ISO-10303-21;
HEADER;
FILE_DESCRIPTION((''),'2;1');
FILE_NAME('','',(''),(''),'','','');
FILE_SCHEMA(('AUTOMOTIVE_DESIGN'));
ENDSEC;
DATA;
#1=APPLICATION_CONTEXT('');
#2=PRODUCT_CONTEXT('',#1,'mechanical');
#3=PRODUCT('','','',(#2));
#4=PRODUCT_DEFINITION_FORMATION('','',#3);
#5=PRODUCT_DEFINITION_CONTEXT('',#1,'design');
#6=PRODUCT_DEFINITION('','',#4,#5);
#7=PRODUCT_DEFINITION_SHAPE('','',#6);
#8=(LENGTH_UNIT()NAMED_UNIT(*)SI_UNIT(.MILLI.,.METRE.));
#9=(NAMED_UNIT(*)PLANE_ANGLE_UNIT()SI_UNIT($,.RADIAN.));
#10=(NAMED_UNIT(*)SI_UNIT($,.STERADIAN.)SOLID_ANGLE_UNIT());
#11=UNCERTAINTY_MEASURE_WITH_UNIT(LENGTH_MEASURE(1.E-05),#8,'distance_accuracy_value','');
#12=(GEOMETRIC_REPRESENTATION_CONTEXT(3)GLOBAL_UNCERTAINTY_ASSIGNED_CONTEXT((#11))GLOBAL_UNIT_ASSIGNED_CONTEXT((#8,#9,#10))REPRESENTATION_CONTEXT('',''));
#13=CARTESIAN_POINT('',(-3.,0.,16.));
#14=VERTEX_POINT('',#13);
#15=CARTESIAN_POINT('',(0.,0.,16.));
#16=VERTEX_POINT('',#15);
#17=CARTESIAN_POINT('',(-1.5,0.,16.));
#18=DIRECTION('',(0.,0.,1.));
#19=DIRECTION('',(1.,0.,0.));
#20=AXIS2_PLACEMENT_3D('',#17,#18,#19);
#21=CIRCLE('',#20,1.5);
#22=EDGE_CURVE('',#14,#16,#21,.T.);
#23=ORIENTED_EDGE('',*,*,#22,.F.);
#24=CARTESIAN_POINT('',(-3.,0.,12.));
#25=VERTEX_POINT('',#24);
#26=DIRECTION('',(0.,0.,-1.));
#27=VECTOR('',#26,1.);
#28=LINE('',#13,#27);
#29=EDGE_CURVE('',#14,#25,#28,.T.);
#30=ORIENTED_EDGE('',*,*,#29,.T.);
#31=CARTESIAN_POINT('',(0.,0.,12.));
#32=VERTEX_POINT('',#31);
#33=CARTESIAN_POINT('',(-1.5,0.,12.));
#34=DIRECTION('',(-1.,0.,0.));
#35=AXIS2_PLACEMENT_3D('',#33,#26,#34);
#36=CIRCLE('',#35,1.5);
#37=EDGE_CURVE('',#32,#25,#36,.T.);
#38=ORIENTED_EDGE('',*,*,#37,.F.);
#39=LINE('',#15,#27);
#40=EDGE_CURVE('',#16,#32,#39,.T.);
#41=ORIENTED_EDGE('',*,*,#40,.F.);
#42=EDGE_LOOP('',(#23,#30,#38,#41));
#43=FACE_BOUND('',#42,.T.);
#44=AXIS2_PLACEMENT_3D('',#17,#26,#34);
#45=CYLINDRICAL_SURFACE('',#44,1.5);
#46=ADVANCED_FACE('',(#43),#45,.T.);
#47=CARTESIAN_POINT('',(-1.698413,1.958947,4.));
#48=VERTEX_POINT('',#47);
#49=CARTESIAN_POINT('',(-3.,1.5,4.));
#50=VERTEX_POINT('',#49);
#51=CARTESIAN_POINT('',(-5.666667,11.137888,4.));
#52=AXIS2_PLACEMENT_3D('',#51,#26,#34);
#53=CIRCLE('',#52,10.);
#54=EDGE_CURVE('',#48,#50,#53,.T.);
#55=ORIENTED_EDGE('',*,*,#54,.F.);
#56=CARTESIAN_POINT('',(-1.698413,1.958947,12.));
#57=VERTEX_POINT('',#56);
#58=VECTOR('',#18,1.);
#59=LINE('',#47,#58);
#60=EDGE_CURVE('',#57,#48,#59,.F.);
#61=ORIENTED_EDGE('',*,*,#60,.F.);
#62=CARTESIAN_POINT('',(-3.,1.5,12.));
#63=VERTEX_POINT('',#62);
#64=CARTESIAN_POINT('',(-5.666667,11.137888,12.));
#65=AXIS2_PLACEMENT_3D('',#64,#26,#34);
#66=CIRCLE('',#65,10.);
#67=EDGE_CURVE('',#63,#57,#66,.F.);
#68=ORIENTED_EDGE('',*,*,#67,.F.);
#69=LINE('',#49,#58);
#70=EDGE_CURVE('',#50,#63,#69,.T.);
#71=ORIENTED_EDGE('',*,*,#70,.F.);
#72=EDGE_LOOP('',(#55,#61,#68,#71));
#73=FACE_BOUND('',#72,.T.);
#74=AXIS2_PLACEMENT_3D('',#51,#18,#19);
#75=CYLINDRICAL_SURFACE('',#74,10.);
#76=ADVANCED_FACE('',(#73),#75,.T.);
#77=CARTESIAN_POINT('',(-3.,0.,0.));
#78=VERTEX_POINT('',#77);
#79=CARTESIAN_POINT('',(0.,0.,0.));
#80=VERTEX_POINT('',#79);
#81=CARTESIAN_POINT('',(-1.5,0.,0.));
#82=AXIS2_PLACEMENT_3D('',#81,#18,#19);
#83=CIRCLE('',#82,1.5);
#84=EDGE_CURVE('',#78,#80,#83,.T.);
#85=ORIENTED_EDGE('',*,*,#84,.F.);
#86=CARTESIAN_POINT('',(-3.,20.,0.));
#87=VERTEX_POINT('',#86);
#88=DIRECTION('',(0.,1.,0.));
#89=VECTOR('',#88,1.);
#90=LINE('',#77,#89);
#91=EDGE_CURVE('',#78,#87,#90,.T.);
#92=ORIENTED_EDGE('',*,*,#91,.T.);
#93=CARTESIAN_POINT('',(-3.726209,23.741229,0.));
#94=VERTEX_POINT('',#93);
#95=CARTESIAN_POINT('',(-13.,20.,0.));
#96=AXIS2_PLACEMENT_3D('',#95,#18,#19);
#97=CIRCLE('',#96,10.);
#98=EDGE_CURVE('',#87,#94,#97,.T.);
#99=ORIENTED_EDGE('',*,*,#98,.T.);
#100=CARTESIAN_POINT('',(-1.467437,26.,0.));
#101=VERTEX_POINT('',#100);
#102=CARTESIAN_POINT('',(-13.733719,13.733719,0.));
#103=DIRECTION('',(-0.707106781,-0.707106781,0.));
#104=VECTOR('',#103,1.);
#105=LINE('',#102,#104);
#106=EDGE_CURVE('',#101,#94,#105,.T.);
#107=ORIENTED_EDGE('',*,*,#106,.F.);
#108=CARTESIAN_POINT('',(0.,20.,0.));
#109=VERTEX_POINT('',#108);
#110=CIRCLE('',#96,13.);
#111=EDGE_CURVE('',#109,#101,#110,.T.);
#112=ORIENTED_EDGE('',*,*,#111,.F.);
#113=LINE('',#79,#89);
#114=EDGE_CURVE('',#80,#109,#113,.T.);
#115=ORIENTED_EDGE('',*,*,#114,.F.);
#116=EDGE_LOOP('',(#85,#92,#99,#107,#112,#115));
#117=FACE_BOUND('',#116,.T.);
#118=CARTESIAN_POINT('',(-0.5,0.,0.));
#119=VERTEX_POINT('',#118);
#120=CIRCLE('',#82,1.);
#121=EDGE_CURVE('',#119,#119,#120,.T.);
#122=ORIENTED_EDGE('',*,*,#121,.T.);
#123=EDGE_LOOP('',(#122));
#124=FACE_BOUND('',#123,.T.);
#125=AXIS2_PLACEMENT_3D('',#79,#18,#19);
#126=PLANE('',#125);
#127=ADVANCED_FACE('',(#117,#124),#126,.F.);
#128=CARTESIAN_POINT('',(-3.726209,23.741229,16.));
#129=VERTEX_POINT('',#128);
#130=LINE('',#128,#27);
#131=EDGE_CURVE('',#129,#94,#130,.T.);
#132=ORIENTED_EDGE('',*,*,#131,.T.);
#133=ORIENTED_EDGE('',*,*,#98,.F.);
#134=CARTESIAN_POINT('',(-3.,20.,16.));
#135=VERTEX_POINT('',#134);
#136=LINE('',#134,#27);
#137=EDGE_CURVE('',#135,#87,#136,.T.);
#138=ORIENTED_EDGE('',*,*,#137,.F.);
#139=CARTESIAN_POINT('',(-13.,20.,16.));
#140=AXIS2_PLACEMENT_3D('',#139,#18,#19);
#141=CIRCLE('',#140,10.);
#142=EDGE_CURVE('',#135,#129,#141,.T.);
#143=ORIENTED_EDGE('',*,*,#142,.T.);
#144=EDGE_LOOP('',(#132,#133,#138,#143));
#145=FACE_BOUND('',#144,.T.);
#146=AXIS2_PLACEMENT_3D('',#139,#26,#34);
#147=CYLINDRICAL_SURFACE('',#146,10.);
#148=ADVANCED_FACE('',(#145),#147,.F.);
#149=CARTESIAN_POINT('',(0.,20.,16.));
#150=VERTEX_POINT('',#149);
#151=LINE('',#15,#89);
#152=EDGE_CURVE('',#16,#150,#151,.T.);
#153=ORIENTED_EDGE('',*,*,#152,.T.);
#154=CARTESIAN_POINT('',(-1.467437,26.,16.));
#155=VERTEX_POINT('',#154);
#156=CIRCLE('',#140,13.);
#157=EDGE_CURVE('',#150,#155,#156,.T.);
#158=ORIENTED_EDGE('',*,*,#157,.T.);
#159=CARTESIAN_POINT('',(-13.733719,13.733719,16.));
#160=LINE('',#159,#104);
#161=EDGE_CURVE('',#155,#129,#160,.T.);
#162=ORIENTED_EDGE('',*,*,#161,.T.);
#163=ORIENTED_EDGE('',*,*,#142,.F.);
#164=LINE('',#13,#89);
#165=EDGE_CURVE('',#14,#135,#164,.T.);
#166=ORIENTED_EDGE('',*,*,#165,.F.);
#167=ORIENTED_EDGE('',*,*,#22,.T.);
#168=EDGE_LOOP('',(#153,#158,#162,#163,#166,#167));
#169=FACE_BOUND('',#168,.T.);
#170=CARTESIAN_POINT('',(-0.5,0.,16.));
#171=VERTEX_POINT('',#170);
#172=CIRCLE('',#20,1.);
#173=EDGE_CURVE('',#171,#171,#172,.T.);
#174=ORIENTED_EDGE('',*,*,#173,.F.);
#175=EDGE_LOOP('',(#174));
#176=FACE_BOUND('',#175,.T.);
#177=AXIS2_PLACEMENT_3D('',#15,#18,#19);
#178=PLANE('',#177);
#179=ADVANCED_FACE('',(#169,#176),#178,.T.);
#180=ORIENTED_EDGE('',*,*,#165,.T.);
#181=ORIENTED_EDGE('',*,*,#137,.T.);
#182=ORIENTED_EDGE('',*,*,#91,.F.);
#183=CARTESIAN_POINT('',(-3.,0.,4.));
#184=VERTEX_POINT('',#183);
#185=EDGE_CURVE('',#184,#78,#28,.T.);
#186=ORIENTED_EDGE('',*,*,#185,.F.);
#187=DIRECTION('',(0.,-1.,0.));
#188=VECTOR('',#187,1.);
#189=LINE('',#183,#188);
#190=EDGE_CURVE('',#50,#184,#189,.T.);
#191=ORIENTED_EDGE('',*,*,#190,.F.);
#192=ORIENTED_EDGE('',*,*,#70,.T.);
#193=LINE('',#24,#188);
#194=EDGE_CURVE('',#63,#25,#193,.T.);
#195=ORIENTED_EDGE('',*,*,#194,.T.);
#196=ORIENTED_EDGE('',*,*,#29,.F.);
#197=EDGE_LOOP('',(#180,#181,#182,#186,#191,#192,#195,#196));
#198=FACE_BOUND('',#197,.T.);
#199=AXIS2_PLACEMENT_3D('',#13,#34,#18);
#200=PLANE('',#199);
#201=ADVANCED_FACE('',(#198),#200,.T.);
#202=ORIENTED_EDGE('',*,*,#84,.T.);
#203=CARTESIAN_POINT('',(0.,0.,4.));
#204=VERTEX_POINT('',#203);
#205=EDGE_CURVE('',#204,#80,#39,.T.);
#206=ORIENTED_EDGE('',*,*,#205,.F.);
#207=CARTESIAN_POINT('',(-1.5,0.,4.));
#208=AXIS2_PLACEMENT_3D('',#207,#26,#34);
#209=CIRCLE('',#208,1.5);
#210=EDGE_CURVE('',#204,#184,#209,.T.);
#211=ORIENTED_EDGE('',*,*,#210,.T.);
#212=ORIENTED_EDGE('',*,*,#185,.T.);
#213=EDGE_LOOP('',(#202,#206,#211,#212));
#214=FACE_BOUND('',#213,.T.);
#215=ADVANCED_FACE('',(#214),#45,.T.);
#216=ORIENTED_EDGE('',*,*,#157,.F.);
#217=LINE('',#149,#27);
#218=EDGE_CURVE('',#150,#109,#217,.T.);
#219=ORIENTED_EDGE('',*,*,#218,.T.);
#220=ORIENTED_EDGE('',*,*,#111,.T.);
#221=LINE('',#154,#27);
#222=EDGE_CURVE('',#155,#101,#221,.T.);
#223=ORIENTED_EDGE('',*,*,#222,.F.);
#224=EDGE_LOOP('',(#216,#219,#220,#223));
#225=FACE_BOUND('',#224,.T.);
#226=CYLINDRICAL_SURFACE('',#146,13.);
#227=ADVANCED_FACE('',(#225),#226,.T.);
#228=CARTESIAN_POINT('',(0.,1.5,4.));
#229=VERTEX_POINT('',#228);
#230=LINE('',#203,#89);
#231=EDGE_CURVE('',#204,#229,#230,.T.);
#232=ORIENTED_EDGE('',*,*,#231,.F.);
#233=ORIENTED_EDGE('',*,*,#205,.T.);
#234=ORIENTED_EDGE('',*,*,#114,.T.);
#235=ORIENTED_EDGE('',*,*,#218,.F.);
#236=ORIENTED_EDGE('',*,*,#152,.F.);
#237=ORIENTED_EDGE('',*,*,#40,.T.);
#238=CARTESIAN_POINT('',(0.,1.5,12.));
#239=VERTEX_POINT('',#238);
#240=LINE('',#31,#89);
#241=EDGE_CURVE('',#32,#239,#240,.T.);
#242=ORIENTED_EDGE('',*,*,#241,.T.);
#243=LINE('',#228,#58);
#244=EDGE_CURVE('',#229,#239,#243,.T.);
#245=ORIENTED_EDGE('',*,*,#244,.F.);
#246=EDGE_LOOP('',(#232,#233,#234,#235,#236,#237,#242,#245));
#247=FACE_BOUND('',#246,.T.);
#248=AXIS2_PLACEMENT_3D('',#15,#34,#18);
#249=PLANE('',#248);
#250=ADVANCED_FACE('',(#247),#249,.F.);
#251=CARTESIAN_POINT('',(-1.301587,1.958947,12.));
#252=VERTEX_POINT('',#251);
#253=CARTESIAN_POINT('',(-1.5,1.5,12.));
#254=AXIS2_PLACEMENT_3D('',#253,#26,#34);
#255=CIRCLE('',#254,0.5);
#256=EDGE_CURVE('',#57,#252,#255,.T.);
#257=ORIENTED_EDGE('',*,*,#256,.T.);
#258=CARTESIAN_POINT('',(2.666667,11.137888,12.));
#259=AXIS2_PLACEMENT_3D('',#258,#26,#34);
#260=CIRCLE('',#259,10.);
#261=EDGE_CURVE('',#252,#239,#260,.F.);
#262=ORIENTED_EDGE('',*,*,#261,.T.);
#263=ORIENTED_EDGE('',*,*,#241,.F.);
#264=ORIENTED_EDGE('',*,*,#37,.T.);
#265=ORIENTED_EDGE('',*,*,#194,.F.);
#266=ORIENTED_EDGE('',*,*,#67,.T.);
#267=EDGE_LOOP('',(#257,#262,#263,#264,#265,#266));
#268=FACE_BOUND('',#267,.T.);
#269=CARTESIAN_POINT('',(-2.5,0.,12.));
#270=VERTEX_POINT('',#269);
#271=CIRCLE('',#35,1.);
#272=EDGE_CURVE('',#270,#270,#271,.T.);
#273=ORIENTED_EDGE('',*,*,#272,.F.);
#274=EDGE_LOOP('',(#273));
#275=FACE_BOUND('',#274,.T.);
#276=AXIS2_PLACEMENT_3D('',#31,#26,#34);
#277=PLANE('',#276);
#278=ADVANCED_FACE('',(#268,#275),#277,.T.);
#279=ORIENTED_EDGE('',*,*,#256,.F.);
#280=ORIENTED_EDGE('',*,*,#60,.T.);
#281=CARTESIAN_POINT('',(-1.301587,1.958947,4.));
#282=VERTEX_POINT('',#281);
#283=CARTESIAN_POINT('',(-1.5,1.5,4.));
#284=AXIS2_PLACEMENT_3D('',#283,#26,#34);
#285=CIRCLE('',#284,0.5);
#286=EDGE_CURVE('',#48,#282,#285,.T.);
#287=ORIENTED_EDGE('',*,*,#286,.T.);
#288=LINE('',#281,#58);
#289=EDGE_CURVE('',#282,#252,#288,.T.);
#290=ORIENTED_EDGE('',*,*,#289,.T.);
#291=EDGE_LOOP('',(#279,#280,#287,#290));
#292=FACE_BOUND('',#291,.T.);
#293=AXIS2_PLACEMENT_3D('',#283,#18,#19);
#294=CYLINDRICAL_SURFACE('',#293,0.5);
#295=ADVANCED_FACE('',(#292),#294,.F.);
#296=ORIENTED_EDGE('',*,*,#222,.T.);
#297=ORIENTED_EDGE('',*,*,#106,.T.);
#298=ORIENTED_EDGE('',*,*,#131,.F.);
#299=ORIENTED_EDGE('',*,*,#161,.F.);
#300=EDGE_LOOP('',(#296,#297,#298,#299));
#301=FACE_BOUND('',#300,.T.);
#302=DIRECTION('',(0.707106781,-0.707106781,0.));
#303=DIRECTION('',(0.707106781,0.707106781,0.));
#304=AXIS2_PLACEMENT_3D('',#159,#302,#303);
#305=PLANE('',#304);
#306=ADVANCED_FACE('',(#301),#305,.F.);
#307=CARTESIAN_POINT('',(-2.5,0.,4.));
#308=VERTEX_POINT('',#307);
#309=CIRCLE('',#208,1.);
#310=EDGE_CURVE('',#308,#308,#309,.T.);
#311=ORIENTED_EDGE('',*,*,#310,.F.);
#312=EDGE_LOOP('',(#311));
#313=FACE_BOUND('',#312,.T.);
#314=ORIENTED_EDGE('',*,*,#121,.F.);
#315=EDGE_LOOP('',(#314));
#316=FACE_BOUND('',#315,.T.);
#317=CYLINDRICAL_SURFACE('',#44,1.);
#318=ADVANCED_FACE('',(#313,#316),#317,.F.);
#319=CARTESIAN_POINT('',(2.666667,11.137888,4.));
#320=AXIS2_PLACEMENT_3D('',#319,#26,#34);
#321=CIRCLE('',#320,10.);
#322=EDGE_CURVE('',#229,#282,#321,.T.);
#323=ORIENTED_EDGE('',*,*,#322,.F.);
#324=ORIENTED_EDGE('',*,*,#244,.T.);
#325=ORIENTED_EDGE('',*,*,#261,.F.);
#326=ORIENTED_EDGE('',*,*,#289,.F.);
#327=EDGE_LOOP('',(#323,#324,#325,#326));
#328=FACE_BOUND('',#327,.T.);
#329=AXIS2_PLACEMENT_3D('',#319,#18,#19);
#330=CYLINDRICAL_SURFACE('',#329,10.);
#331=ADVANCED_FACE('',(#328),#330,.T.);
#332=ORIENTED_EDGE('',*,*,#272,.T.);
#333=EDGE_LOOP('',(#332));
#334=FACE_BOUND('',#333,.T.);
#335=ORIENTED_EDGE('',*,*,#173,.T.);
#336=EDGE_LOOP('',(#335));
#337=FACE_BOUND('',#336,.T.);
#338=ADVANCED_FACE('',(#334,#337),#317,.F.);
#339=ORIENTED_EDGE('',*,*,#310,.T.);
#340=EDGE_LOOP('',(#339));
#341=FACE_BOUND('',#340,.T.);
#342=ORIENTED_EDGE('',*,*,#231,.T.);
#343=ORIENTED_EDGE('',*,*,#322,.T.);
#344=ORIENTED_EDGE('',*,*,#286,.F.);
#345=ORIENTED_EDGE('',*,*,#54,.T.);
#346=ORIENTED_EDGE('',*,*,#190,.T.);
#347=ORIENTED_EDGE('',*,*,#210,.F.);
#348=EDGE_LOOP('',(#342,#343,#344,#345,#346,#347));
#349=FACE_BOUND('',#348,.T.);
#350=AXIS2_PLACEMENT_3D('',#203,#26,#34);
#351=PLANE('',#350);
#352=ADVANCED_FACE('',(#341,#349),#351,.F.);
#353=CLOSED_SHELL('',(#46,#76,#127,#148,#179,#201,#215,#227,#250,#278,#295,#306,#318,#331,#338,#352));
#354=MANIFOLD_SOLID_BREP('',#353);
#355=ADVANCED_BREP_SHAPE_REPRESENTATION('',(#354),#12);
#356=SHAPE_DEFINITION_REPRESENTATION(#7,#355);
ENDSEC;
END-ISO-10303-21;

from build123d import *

# Parameters (mm, degrees)
SKETCH1_R           = 1
BOSS_EXTRUDE1_DEPTH = 16
CUT_EXTRUDE1_START  = 8
SKETCH4_R           = 0.5
SKETCH4_R_2         = 1
CUT_EXTRUDE1_DEPTH  = 8
FILLET1_R           = 10


with BuildPart() as part:
    # Sketch1 → Boss-Extrude1 (new body)
    with BuildSketch(Plane.XY):
        with BuildLine():
            ThreePointArc((0, 20), (-0.37218717, 23.088420816), (-1.467437405, 26))
            Line((-1.467437405, 26), (-3.726208596, 23.741228809))
            ThreePointArc((-3.726208596, 23.741228809), (-3.183230826, 21.90552958), (-3, 20))
            Line((-3, 20), (-3, 0))
            ThreePointArc((-3, 0), (-1.5, -1.5), (0, 0))
            Line((0, 0), (0, 20))
        make_face()
        with Locations((-1.5, 0)):
            Circle(SKETCH1_R, mode=Mode.SUBTRACT)
    extrude(amount=BOSS_EXTRUDE1_DEPTH)

    # Sketch4 → Cut-Extrude1 (cut)
    # profile 1 of 10: a face of its own
    with BuildSketch(Plane(origin=(0, 0, 12), x_dir=(-1, 0, 0), z_dir=(0, 0, -1)).offset(CUT_EXTRUDE1_START)):
        with Locations((1.5, 1.5)):
            Circle(SKETCH4_R)
    # profile 2 of 10: a face of its own
    with BuildSketch(Plane(origin=(0, 0, 12), x_dir=(-1, 0, 0), z_dir=(0, 0, -1)).offset(CUT_EXTRUDE1_START)):
        with BuildLine():
            ThreePointArc((3, 0), (1.5, 1.5), (0, 0))
            ThreePointArc((0, 0), (1.5, -1.5), (3, 0))
        make_face()
        with Locations((1.5, 0)):
            Circle(SKETCH4_R_2, mode=Mode.SUBTRACT)
    # profile 3 of 10: a face of its own
    with BuildSketch(Plane(origin=(0, 0, 12), x_dir=(-1, 0, 0), z_dir=(0, 0, -1)).offset(CUT_EXTRUDE1_START)):
        with BuildLine():
            ThreePointArc((1.993006649, 1.416666667), (2.722601728, 0.869048338), (3, 0))
            Line((3, 0), (3, 1.5))
            Line((3, 1.5), (2, 1.5))
            ThreePointArc((2, 1.5), (1.998248595, 1.45818687), (1.993006649, 1.416666667))
        make_face()
    # profile 4 of 10: a face of its own
    with BuildSketch(Plane(origin=(0, 0, 12), x_dir=(-1, 0, 0), z_dir=(0, 0, -1)).offset(CUT_EXTRUDE1_START)):
        with BuildLine():
            ThreePointArc((1.5, 1.5), (1.25, 1.479019946), (1.006993351, 1.416666667))
            ThreePointArc((1.006993351, 1.416666667), (1.177251388, 1.118118692), (1.5, 1))
            ThreePointArc((1.5, 1), (1.822748612, 1.118118692), (1.993006649, 1.416666667))
            ThreePointArc((1.993006649, 1.416666667), (1.75, 1.479019946), (1.5, 1.5))
        make_face()
    # profile 5 of 10: a face of its own
    with BuildSketch(Plane(origin=(0, 0, 12), x_dir=(-1, 0, 0), z_dir=(0, 0, -1)).offset(CUT_EXTRUDE1_START)):
        with BuildLine():
            Line((0, 1.5), (0, 0))
            ThreePointArc((0, 0), (0.277398272, 0.869048338), (1.006993351, 1.416666667))
            ThreePointArc((1.006993351, 1.416666667), (1.001751405, 1.45818687), (1, 1.5))
            Line((1, 1.5), (0, 1.5))
        make_face()
    # profile 6 of 10: a face of its own
    with BuildSketch(Plane(origin=(0, 0, 12), x_dir=(-1, 0, 0), z_dir=(0, 0, -1)).offset(CUT_EXTRUDE1_START)):
        with BuildLine():
            ThreePointArc((1, 1.5), (1.001751405, 1.45818687), (1.006993351, 1.416666667))
            ThreePointArc((1.006993351, 1.416666667), (1.25, 1.479019946), (1.5, 1.5))
            Line((1.5, 1.5), (1, 1.5))
        make_face()
    # profile 7 of 10: a face of its own
    with BuildSketch(Plane(origin=(0, 0, 12), x_dir=(-1, 0, 0), z_dir=(0, 0, -1)).offset(CUT_EXTRUDE1_START)):
        with BuildLine():
            ThreePointArc((1.5, 1.5), (1.75, 1.479019946), (1.993006649, 1.416666667))
            ThreePointArc((1.993006649, 1.416666667), (1.998248595, 1.45818687), (2, 1.5))
            Line((2, 1.5), (1.5, 1.5))
        make_face()
    # profile 8 of 10: a face of its own
    with BuildSketch(Plane(origin=(0, 0, 12), x_dir=(-1, 0, 0), z_dir=(0, 0, -1)).offset(CUT_EXTRUDE1_START)):
        with BuildLine():
            ThreePointArc((2, 1.5), (1.5, 2), (1, 1.5))
            Line((1, 1.5), (1.5, 1.5))
            Line((1.5, 1.5), (2, 1.5))
        make_face()
    # profile 9 of 10: a face of its own
    with BuildSketch(Plane(origin=(0, 0, 12), x_dir=(-1, 0, 0), z_dir=(0, 0, -1)).offset(CUT_EXTRUDE1_START)):
        with BuildLine():
            ThreePointArc((1, 1.5), (1.001751405, 1.45818687), (1.006993351, 1.416666667))
            ThreePointArc((1.006993351, 1.416666667), (1.25, 1.479019946), (1.5, 1.5))
            Line((1.5, 1.5), (1, 1.5))
        make_face()
    # profile 10 of 10: a face of its own
    with BuildSketch(Plane(origin=(0, 0, 12), x_dir=(-1, 0, 0), z_dir=(0, 0, -1)).offset(CUT_EXTRUDE1_START)):
        with BuildLine():
            ThreePointArc((1.5, 1.5), (1.75, 1.479019946), (1.993006649, 1.416666667))
            ThreePointArc((1.993006649, 1.416666667), (1.998248595, 1.45818687), (2, 1.5))
            Line((2, 1.5), (1.5, 1.5))
        make_face()
    extrude(amount=-CUT_EXTRUDE1_DEPTH, mode=Mode.SUBTRACT)

    # Fillet1
    # the kernel refuses this fillet: 10 mm, written as the material it takes off along each edge
    with BuildSketch(Plane(origin=(-2, 1.5, 4), x_dir=(-1, 0, 0), z_dir=(0, 0, 1))) as fillet1_piece_1:
        with BuildLine():
            CenterArc((3.666666667, -9.637888197), FILLET1_R, 105.466009953, 7.913858162)
            Line((-0.301587302, -0.458947057), (-0.380952381, -0.275368234))
            ThreePointArc((-0.380952381, -0.275368234), (-0.249286732, -0.164750894), (-0.2, 0))
            Line((-0.2, 0), (0, 0.2))
            ThreePointArc((0, 0.2), (0.5, 0.2), (0.946666667, 0.192757764))
            Line((0.946666667, 0.192757764), (1, 0))
        make_face()
    extrude(amount=8, mode=Mode.SUBTRACT)
    with BuildSketch(Plane(origin=(-1, 1.5, 4), x_dir=(-0.5491696473652747, 0.8357108940373459, 0), z_dir=(0, 0, 1))) as fillet1_piece_2:
        with BuildLine():
            CenterArc((6.040866121, -8.35710894), FILLET1_R, 123.310065942, 7.913858162)
            Line((-0.549169647, -0.835710894), (-0.680970363, -0.685282933))
            ThreePointArc((-0.680970363, -0.685282933), (-0.441727002, -0.308021518), (-0.167142179, 0.109833929))
            Line((-0.167142179, 0.109833929), (0.109833929, 0.167142179))
            ThreePointArc((0.109833929, 0.167142179), (0.274584824, 0.117855447), (0.439335718, 0.167142179))
            Line((0.439335718, 0.167142179), (0.549169647, 0))
        make_face()
    extrude(amount=8, mode=Mode.SUBTRACT)


solid = part.part
